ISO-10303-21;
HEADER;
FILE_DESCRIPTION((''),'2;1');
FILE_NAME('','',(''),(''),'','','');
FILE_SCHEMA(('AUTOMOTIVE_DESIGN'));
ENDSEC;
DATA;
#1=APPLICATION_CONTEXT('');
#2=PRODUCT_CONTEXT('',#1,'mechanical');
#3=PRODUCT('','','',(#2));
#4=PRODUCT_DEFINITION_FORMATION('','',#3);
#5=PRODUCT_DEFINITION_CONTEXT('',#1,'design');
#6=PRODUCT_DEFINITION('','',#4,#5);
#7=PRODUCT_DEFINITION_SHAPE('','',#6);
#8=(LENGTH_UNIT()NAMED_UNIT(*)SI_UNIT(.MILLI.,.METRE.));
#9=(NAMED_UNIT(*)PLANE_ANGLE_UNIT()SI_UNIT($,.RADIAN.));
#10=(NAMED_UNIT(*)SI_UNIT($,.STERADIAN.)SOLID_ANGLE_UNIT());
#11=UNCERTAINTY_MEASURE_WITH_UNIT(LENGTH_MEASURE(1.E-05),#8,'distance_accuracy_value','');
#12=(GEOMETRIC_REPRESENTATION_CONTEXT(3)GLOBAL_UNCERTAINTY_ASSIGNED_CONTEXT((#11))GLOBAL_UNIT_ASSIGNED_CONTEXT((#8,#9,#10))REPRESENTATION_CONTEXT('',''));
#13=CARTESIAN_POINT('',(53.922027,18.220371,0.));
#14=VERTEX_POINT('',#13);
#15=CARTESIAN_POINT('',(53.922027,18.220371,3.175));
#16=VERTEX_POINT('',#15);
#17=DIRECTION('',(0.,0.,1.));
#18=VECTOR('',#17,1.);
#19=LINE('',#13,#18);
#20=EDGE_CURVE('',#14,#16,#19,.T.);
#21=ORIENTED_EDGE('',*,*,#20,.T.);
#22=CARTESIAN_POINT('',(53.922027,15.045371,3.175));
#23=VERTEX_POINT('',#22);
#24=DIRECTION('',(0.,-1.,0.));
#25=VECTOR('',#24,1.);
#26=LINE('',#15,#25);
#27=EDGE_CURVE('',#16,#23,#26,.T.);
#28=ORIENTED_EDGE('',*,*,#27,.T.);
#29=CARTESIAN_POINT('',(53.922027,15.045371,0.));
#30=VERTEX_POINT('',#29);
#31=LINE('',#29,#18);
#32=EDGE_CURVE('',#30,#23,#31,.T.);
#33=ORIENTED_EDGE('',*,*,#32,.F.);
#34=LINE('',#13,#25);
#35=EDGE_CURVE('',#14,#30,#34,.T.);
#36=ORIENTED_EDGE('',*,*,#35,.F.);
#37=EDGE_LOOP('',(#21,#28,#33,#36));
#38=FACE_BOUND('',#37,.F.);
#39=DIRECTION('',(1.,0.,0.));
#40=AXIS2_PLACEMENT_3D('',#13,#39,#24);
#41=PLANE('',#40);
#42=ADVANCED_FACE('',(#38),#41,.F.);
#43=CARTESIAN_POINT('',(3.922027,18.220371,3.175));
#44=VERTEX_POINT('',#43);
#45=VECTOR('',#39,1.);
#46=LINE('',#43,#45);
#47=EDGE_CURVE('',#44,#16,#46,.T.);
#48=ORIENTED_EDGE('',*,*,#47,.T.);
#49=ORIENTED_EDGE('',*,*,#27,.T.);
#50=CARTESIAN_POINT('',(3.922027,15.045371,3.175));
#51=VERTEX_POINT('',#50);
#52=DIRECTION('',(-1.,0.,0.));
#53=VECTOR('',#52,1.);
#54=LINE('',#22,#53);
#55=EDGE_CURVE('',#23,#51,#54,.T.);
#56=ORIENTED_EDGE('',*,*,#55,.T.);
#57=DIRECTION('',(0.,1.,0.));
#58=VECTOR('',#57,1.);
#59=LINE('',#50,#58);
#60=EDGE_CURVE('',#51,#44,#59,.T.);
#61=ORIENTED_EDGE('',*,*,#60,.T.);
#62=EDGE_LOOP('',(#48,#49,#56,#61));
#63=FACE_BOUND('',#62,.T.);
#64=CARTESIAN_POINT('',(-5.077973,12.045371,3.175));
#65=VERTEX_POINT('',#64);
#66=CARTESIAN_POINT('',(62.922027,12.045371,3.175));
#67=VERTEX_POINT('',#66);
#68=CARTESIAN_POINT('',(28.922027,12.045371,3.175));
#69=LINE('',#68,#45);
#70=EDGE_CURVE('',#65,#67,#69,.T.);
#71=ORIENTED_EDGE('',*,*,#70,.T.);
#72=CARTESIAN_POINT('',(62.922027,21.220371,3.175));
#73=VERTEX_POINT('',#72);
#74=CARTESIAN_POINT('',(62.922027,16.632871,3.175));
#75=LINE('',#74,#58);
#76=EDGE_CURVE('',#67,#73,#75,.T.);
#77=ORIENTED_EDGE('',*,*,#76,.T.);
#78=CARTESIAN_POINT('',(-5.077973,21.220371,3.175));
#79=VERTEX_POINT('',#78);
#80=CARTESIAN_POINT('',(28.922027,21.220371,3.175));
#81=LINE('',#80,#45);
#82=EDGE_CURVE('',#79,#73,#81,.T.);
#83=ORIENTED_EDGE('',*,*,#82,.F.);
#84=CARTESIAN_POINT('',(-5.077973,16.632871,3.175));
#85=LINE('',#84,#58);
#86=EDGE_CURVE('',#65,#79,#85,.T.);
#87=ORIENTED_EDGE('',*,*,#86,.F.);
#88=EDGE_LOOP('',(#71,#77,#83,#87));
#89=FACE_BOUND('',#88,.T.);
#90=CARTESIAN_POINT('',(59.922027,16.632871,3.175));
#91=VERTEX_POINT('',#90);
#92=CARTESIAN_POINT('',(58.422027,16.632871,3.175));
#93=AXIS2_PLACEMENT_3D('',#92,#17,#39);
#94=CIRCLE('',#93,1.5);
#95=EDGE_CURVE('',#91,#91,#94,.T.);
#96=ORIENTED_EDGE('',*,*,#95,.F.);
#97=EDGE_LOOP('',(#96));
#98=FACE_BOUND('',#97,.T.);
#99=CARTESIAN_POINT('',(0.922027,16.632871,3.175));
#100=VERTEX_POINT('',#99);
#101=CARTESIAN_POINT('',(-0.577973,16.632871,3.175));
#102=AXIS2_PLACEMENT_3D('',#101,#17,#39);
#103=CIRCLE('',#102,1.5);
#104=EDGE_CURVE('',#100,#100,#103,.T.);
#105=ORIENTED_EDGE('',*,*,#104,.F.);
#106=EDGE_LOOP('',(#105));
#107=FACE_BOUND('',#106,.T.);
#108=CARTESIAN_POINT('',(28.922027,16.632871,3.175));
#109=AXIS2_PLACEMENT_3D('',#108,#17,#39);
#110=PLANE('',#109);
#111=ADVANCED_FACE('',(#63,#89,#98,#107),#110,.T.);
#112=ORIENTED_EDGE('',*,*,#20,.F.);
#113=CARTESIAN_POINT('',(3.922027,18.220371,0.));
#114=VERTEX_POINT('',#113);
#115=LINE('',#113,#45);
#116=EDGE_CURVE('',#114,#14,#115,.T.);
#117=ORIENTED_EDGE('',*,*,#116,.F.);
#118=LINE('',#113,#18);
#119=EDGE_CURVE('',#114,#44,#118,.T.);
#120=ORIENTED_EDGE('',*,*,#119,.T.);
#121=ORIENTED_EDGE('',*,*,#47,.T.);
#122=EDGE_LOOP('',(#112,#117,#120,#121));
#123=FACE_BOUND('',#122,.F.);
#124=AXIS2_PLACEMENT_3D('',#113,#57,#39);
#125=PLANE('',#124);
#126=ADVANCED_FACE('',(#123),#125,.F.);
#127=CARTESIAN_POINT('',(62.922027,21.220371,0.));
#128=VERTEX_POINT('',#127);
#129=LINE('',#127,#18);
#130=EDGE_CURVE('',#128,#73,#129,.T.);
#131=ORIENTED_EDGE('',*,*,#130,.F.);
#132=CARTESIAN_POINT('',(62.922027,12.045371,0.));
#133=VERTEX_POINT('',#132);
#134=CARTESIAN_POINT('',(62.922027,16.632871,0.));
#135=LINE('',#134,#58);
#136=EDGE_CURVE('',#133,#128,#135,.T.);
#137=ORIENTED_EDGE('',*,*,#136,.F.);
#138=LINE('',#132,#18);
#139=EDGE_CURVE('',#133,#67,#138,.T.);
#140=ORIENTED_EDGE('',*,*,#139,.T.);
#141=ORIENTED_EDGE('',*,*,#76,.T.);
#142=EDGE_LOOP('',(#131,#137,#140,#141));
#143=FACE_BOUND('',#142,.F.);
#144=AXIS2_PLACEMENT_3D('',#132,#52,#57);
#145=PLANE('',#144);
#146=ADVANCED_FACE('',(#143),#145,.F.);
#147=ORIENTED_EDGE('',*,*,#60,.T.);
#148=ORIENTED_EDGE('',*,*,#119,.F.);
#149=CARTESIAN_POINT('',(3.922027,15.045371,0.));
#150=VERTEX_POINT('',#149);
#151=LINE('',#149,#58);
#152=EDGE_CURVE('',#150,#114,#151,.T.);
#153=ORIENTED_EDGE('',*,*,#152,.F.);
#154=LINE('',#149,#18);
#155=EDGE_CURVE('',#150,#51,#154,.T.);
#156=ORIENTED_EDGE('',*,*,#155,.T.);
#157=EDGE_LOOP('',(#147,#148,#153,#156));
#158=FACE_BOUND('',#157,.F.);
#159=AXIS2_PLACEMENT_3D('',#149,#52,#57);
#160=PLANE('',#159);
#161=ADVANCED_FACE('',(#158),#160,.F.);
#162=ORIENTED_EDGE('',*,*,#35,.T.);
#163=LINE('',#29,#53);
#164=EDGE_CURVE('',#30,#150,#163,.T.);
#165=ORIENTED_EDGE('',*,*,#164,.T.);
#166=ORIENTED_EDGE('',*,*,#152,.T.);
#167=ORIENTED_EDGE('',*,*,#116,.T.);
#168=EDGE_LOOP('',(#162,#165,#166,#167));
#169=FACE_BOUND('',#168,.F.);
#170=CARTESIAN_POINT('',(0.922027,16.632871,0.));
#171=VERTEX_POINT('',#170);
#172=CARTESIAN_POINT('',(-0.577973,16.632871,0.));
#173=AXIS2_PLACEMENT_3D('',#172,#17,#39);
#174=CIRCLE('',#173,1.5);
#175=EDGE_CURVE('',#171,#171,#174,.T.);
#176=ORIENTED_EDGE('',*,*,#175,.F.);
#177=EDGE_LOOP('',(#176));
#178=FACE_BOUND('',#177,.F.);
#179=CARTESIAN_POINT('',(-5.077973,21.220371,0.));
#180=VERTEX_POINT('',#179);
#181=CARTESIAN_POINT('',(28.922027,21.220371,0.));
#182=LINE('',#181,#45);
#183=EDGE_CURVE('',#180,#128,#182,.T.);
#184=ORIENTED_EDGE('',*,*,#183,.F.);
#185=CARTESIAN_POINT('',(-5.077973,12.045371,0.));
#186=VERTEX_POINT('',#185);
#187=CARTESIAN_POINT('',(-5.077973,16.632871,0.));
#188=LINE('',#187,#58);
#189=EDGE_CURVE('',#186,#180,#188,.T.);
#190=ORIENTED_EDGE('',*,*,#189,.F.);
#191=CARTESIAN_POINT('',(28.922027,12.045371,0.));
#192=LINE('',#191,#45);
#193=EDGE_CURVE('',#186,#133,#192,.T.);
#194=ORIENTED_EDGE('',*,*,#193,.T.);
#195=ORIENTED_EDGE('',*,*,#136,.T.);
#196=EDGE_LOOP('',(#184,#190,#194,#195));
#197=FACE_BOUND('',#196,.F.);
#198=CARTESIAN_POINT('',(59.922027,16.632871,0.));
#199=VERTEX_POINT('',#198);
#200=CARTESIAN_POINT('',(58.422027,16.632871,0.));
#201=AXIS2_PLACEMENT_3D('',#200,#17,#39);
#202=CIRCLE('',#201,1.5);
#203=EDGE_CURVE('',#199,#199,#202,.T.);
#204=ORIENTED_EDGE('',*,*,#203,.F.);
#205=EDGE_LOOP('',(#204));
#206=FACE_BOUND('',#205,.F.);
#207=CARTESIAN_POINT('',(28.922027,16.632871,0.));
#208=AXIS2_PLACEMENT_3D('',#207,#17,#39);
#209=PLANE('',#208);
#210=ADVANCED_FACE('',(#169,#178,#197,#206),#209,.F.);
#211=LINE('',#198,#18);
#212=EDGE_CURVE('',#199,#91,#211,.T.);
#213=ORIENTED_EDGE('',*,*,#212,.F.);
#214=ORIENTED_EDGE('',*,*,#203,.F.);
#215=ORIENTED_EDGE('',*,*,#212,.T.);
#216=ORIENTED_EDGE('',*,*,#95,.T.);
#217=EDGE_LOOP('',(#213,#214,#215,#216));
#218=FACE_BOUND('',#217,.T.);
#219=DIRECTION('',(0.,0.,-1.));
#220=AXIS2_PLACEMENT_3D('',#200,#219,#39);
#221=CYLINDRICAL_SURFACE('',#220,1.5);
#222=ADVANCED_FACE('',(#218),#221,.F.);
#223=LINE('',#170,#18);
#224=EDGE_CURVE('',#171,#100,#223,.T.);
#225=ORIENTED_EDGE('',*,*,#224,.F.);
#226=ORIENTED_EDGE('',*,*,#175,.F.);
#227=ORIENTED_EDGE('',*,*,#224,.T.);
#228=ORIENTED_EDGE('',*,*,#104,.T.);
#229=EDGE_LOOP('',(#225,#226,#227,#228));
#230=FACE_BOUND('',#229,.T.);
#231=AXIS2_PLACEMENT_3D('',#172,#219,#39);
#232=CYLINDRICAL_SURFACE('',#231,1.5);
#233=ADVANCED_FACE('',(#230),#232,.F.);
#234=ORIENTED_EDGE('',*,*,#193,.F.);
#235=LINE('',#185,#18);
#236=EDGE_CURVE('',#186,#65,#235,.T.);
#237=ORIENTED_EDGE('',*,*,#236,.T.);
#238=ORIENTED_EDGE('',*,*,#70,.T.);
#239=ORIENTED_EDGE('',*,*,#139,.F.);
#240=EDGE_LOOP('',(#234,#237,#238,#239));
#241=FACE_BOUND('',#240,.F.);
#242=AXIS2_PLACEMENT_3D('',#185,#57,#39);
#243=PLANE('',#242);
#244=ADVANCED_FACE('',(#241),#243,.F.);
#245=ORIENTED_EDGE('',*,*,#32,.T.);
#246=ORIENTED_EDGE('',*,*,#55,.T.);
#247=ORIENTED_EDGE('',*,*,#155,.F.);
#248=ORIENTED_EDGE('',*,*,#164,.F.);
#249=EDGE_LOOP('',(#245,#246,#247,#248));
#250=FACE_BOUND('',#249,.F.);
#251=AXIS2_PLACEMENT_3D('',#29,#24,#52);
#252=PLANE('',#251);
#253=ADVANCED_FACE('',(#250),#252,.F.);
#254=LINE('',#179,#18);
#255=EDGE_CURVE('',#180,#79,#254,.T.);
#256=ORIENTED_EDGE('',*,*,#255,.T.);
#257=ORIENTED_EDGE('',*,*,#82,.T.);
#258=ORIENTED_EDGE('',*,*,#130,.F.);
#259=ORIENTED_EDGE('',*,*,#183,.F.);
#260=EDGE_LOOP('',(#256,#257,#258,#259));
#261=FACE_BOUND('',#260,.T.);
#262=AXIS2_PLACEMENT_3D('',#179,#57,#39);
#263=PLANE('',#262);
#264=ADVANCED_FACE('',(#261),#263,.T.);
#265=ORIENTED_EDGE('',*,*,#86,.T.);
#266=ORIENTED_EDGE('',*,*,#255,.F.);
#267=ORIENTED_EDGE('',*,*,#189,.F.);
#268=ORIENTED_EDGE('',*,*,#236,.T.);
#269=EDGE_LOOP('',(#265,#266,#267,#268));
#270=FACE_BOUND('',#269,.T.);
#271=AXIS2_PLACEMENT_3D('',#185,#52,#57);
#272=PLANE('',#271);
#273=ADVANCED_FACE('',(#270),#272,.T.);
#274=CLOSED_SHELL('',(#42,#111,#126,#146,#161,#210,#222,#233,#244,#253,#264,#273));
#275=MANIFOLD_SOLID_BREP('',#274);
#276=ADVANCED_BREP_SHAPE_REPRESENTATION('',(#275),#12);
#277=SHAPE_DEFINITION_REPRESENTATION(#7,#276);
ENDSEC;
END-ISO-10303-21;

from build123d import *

# Parameters (mm, degrees)
F0_W     = 68
F0_H     = 9.175
F0_R     = 1.5
F1_DEPTH = 3.175


# Not quite as in the source:
# - a length typed as a fraction of an inch, garbled in the dataset ("3 / 203.2 mm" for 3/8 in), is restored


with BuildPart() as f1:
    # F0 (on Top) → F1 (new body)
    with BuildSketch(Plane.XY):
        with Locations((28.9220271409, 16.632870598)):
            Rectangle(F0_W, F0_H)
        with Locations((-0.5779728591, 16.632870598)):
            Circle(F0_R, mode=Mode.SUBTRACT)
        Polygon((3.9220271409, 15.045370598), (3.9220271409, 18.220370598), (28.9220271409, 18.220370598), (53.9220271409, 18.220370598), (53.9220271409, 15.045370598), align=None, mode=Mode.SUBTRACT)
        with Locations((58.4220271409, 16.632870598)):
            Circle(F0_R, mode=Mode.SUBTRACT)
    extrude(amount=F1_DEPTH)


solid = f1.part
